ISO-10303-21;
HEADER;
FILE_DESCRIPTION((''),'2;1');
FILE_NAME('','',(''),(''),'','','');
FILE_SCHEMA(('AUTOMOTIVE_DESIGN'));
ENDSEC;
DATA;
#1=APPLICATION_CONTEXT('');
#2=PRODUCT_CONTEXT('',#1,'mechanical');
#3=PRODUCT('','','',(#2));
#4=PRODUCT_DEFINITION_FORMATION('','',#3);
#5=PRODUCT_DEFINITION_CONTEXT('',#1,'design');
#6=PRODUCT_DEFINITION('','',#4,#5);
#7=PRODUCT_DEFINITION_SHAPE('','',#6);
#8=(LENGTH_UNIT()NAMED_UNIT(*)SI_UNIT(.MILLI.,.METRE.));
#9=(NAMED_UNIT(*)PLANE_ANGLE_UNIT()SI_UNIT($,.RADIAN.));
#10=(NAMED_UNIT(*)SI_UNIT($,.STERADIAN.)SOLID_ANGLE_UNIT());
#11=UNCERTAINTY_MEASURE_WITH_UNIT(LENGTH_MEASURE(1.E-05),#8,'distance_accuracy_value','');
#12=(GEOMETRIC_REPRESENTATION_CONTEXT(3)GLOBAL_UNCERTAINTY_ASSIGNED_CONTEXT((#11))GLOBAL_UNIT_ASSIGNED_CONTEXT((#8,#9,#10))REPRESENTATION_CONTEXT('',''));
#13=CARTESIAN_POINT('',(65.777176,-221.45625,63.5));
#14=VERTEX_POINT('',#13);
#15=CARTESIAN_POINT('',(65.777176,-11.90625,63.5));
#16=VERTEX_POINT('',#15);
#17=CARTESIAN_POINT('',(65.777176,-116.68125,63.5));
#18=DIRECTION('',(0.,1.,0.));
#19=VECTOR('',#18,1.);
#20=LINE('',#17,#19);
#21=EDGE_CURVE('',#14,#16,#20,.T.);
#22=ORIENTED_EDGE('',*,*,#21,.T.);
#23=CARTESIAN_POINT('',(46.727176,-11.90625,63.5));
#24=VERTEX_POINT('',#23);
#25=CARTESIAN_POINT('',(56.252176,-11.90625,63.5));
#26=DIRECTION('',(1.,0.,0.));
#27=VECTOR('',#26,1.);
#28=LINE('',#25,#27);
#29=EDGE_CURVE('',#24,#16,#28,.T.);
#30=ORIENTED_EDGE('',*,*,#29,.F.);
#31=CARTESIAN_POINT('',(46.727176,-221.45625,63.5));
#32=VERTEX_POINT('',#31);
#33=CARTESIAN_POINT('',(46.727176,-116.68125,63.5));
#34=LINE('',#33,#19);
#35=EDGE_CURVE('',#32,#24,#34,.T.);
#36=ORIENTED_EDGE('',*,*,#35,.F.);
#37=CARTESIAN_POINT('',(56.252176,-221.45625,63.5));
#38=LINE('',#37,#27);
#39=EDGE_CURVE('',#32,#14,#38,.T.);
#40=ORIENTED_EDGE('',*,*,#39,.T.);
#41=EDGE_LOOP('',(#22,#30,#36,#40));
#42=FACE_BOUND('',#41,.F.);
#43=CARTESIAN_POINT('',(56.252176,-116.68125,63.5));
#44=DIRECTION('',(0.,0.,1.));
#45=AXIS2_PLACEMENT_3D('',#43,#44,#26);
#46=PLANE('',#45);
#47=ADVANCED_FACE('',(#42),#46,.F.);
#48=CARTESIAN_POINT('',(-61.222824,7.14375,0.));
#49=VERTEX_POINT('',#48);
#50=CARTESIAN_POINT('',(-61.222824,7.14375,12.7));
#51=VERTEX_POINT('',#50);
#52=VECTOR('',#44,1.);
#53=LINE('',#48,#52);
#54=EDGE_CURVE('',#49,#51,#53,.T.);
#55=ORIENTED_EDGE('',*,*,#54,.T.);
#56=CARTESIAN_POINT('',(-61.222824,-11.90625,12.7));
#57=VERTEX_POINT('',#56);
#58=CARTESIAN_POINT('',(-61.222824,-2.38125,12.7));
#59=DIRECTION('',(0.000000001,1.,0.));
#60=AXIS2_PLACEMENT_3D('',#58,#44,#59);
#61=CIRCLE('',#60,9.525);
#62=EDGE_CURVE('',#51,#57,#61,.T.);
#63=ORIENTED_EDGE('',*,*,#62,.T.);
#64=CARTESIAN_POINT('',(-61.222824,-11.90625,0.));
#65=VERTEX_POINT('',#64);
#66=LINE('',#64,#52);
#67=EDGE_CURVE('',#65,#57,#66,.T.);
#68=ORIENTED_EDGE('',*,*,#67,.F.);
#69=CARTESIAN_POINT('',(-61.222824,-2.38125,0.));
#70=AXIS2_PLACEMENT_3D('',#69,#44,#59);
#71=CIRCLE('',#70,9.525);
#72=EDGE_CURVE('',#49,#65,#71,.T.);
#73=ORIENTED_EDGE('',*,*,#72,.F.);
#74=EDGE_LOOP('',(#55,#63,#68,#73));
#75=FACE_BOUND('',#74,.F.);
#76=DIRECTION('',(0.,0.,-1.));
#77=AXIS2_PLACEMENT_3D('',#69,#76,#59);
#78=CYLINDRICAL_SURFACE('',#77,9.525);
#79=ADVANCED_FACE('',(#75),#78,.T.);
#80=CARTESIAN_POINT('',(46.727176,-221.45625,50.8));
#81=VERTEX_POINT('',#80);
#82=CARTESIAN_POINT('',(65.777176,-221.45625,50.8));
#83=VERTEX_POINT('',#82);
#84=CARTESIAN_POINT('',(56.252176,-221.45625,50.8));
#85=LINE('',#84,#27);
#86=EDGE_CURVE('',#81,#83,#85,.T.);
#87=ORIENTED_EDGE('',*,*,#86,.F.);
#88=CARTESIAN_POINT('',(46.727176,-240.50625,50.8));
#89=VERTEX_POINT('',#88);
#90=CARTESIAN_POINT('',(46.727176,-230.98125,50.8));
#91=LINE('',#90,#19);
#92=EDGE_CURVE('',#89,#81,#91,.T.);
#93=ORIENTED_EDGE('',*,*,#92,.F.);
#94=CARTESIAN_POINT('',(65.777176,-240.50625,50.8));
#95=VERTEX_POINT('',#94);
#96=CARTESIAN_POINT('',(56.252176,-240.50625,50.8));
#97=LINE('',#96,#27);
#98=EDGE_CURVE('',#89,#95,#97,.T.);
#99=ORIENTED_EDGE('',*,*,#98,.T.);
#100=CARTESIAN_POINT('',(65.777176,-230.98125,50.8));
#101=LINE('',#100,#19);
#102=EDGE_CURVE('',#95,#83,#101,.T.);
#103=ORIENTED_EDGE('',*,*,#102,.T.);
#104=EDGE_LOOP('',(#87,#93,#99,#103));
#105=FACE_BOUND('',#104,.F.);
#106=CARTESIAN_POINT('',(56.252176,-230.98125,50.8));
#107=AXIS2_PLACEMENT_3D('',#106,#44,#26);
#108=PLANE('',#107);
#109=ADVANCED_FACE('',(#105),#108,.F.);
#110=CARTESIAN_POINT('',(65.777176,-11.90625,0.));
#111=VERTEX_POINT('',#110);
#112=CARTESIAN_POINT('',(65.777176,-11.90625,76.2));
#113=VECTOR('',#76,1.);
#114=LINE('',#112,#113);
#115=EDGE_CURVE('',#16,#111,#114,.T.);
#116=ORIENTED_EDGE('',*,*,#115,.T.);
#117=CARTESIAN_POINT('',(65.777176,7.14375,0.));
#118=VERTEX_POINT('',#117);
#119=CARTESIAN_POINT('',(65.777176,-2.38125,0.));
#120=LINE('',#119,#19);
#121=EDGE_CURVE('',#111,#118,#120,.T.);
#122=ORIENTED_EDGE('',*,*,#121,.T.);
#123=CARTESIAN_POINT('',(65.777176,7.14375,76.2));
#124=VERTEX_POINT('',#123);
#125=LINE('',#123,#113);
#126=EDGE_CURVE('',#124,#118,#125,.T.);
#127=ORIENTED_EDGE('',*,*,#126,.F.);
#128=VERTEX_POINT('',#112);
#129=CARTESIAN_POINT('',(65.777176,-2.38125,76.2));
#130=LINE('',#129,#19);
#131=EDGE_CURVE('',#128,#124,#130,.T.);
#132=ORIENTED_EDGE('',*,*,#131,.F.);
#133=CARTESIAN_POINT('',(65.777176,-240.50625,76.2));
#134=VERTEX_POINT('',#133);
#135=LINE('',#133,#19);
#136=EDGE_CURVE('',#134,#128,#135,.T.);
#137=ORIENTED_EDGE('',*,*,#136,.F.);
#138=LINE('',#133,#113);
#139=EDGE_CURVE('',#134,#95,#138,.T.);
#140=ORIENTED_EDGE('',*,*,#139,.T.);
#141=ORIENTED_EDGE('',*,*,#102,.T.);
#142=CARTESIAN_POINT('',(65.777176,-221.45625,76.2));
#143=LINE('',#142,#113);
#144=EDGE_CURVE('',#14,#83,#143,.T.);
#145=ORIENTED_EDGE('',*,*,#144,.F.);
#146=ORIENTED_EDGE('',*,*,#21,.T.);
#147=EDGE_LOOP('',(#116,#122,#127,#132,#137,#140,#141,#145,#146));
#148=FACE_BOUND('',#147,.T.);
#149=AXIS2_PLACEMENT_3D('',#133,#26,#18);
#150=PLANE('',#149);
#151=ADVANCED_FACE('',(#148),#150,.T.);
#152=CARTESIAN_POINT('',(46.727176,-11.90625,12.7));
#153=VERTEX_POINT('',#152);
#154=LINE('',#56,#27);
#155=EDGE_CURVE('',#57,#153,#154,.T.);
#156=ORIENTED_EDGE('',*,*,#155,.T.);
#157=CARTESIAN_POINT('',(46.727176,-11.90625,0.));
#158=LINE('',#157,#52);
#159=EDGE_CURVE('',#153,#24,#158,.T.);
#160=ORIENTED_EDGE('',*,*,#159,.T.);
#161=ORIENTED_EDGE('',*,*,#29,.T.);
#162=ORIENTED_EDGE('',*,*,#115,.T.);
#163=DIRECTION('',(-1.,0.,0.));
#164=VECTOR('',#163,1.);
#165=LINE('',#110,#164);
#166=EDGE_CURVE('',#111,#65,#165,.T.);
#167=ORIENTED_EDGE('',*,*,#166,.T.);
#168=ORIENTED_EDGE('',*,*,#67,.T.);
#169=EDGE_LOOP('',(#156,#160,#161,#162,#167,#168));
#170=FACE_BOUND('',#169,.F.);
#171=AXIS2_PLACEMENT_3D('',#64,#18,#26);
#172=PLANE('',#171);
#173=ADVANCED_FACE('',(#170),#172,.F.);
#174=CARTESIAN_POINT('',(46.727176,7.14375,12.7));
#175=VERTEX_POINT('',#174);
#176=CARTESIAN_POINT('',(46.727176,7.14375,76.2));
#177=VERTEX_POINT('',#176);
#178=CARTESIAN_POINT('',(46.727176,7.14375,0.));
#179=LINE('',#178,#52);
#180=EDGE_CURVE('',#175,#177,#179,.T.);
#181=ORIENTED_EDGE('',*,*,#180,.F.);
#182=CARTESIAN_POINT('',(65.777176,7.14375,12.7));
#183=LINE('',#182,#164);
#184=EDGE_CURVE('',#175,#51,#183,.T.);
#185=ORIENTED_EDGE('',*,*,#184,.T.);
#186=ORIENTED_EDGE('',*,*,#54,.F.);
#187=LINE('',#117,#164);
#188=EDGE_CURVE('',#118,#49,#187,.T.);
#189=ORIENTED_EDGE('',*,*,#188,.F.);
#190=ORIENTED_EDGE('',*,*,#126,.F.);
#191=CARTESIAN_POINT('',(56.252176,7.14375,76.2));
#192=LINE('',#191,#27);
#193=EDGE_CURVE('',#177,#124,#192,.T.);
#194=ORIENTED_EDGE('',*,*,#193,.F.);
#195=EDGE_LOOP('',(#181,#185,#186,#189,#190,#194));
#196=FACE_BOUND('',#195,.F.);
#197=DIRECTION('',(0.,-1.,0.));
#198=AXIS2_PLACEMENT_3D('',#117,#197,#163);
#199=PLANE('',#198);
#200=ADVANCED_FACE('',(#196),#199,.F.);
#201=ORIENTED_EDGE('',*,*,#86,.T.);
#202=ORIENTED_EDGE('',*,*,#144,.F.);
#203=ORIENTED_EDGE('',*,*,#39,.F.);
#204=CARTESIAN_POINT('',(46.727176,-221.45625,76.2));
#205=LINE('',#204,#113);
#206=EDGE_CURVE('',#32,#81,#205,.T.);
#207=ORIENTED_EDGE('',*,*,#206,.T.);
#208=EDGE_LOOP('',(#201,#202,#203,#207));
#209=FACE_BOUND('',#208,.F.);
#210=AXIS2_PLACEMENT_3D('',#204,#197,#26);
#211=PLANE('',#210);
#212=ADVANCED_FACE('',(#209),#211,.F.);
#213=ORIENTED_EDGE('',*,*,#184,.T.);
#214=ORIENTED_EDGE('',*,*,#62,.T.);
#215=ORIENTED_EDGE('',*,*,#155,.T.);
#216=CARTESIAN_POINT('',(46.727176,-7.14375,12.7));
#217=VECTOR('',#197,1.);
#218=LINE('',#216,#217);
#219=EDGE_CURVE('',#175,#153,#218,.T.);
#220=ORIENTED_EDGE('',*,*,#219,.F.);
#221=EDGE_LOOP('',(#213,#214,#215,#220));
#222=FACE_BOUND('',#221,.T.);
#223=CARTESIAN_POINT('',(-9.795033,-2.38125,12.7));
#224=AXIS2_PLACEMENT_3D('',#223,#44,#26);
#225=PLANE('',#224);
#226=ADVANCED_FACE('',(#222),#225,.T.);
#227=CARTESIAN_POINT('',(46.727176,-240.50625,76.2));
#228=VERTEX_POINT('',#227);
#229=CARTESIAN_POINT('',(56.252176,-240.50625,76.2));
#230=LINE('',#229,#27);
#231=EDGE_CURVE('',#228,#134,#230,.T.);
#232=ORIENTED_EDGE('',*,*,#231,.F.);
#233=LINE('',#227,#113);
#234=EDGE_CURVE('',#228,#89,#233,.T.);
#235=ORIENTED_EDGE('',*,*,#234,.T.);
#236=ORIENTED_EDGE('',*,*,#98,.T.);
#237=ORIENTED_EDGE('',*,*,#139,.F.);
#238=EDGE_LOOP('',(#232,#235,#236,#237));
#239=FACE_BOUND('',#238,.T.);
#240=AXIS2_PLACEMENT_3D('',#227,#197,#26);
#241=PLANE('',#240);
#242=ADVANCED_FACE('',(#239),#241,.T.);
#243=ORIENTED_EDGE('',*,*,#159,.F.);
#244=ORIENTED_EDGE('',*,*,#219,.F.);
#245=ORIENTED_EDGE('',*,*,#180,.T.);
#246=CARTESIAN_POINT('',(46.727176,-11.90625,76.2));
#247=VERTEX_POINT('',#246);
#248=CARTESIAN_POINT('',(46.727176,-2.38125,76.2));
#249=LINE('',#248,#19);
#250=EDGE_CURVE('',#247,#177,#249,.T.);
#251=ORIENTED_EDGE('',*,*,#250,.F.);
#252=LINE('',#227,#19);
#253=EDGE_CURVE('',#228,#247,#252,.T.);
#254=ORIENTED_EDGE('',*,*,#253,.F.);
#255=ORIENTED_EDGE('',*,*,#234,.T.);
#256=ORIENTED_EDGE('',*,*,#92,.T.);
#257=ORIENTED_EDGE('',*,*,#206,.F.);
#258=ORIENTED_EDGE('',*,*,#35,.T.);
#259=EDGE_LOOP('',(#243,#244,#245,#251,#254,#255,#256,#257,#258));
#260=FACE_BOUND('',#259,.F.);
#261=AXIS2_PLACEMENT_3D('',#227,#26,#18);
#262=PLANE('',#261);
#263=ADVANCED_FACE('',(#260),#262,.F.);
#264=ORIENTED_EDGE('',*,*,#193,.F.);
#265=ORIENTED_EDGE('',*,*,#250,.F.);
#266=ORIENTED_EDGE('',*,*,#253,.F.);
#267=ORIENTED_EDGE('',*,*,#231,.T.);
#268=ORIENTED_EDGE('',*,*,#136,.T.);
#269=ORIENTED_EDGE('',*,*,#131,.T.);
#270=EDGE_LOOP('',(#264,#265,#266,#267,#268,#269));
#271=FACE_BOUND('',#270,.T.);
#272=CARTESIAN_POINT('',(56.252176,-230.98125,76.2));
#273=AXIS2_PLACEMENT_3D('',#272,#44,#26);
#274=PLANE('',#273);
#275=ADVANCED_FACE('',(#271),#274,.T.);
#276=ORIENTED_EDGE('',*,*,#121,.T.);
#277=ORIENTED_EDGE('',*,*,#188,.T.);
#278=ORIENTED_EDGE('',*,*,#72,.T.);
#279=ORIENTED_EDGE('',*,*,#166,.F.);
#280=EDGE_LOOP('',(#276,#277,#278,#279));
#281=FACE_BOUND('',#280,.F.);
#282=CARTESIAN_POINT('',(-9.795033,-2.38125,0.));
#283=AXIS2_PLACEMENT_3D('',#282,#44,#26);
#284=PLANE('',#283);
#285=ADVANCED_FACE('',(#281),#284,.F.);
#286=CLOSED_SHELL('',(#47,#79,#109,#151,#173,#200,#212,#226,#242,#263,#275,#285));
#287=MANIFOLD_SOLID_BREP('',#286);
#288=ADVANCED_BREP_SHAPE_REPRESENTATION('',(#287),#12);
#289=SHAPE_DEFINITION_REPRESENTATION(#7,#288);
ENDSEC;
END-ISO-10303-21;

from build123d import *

# Parameters (mm, degrees)
F0_W     = 19.0500000055
F0_H     = 19.05
F1_DEPTH = 12.7
F2_DEPTH = 76.2
F3_W     = 19.05
F3_H     = 209.55
F4_DEPTH = 12.7
F3_H_2   = 19.05
F5_DEPTH = 25.4


# Not quite as in the source:
# - a feature names something its author has since deleted; it is built from what else it names


with BuildPart() as f1:
    # F0 (on Top) → F1 (new body)
    with BuildSketch(Plane.XY):
        with BuildLine():
            Line((46.7271760769, 7.14375), (-61.2228239231, 7.14375))
            ThreePointArc((-61.2228239231, 7.14375), (-70.7478239286, -2.3812499973), (-61.2228239286, -11.90625))
            Line((-61.2228239286, -11.90625), (46.7271760714, -11.90625))
            Line((46.7271760714, -11.90625), (46.7271760769, 7.14375))
        make_face()
        with Locations((56.2521760742, -2.38125)):
            Rectangle(F0_W, F0_H)
    extrude(amount=F1_DEPTH)

    # F0 (on Top) → F2 (join)
    with BuildSketch(Plane.XY):
        with Locations((56.2521760742, -2.38125)):
            Rectangle(F0_W, F0_H)
    extrude(amount=F2_DEPTH)

    # F3 (on face) → F4 (join)
    with BuildSketch(Plane.XY.offset(76.2)):
        with Locations((56.2521760742, -116.68125)):
            Rectangle(F3_W, F3_H)
    extrude(amount=-F4_DEPTH)

    # F3 (on face) → F5 (join)
    with BuildSketch(Plane.XY.offset(76.2)):
        with Locations((56.2521760742, -230.98125)):
            Rectangle(F3_W, F3_H_2)
    extrude(amount=-F5_DEPTH)


with BuildPart() as f6_1:
    # F6: copy of F1
    add(f1.part)


solid = f1.part
